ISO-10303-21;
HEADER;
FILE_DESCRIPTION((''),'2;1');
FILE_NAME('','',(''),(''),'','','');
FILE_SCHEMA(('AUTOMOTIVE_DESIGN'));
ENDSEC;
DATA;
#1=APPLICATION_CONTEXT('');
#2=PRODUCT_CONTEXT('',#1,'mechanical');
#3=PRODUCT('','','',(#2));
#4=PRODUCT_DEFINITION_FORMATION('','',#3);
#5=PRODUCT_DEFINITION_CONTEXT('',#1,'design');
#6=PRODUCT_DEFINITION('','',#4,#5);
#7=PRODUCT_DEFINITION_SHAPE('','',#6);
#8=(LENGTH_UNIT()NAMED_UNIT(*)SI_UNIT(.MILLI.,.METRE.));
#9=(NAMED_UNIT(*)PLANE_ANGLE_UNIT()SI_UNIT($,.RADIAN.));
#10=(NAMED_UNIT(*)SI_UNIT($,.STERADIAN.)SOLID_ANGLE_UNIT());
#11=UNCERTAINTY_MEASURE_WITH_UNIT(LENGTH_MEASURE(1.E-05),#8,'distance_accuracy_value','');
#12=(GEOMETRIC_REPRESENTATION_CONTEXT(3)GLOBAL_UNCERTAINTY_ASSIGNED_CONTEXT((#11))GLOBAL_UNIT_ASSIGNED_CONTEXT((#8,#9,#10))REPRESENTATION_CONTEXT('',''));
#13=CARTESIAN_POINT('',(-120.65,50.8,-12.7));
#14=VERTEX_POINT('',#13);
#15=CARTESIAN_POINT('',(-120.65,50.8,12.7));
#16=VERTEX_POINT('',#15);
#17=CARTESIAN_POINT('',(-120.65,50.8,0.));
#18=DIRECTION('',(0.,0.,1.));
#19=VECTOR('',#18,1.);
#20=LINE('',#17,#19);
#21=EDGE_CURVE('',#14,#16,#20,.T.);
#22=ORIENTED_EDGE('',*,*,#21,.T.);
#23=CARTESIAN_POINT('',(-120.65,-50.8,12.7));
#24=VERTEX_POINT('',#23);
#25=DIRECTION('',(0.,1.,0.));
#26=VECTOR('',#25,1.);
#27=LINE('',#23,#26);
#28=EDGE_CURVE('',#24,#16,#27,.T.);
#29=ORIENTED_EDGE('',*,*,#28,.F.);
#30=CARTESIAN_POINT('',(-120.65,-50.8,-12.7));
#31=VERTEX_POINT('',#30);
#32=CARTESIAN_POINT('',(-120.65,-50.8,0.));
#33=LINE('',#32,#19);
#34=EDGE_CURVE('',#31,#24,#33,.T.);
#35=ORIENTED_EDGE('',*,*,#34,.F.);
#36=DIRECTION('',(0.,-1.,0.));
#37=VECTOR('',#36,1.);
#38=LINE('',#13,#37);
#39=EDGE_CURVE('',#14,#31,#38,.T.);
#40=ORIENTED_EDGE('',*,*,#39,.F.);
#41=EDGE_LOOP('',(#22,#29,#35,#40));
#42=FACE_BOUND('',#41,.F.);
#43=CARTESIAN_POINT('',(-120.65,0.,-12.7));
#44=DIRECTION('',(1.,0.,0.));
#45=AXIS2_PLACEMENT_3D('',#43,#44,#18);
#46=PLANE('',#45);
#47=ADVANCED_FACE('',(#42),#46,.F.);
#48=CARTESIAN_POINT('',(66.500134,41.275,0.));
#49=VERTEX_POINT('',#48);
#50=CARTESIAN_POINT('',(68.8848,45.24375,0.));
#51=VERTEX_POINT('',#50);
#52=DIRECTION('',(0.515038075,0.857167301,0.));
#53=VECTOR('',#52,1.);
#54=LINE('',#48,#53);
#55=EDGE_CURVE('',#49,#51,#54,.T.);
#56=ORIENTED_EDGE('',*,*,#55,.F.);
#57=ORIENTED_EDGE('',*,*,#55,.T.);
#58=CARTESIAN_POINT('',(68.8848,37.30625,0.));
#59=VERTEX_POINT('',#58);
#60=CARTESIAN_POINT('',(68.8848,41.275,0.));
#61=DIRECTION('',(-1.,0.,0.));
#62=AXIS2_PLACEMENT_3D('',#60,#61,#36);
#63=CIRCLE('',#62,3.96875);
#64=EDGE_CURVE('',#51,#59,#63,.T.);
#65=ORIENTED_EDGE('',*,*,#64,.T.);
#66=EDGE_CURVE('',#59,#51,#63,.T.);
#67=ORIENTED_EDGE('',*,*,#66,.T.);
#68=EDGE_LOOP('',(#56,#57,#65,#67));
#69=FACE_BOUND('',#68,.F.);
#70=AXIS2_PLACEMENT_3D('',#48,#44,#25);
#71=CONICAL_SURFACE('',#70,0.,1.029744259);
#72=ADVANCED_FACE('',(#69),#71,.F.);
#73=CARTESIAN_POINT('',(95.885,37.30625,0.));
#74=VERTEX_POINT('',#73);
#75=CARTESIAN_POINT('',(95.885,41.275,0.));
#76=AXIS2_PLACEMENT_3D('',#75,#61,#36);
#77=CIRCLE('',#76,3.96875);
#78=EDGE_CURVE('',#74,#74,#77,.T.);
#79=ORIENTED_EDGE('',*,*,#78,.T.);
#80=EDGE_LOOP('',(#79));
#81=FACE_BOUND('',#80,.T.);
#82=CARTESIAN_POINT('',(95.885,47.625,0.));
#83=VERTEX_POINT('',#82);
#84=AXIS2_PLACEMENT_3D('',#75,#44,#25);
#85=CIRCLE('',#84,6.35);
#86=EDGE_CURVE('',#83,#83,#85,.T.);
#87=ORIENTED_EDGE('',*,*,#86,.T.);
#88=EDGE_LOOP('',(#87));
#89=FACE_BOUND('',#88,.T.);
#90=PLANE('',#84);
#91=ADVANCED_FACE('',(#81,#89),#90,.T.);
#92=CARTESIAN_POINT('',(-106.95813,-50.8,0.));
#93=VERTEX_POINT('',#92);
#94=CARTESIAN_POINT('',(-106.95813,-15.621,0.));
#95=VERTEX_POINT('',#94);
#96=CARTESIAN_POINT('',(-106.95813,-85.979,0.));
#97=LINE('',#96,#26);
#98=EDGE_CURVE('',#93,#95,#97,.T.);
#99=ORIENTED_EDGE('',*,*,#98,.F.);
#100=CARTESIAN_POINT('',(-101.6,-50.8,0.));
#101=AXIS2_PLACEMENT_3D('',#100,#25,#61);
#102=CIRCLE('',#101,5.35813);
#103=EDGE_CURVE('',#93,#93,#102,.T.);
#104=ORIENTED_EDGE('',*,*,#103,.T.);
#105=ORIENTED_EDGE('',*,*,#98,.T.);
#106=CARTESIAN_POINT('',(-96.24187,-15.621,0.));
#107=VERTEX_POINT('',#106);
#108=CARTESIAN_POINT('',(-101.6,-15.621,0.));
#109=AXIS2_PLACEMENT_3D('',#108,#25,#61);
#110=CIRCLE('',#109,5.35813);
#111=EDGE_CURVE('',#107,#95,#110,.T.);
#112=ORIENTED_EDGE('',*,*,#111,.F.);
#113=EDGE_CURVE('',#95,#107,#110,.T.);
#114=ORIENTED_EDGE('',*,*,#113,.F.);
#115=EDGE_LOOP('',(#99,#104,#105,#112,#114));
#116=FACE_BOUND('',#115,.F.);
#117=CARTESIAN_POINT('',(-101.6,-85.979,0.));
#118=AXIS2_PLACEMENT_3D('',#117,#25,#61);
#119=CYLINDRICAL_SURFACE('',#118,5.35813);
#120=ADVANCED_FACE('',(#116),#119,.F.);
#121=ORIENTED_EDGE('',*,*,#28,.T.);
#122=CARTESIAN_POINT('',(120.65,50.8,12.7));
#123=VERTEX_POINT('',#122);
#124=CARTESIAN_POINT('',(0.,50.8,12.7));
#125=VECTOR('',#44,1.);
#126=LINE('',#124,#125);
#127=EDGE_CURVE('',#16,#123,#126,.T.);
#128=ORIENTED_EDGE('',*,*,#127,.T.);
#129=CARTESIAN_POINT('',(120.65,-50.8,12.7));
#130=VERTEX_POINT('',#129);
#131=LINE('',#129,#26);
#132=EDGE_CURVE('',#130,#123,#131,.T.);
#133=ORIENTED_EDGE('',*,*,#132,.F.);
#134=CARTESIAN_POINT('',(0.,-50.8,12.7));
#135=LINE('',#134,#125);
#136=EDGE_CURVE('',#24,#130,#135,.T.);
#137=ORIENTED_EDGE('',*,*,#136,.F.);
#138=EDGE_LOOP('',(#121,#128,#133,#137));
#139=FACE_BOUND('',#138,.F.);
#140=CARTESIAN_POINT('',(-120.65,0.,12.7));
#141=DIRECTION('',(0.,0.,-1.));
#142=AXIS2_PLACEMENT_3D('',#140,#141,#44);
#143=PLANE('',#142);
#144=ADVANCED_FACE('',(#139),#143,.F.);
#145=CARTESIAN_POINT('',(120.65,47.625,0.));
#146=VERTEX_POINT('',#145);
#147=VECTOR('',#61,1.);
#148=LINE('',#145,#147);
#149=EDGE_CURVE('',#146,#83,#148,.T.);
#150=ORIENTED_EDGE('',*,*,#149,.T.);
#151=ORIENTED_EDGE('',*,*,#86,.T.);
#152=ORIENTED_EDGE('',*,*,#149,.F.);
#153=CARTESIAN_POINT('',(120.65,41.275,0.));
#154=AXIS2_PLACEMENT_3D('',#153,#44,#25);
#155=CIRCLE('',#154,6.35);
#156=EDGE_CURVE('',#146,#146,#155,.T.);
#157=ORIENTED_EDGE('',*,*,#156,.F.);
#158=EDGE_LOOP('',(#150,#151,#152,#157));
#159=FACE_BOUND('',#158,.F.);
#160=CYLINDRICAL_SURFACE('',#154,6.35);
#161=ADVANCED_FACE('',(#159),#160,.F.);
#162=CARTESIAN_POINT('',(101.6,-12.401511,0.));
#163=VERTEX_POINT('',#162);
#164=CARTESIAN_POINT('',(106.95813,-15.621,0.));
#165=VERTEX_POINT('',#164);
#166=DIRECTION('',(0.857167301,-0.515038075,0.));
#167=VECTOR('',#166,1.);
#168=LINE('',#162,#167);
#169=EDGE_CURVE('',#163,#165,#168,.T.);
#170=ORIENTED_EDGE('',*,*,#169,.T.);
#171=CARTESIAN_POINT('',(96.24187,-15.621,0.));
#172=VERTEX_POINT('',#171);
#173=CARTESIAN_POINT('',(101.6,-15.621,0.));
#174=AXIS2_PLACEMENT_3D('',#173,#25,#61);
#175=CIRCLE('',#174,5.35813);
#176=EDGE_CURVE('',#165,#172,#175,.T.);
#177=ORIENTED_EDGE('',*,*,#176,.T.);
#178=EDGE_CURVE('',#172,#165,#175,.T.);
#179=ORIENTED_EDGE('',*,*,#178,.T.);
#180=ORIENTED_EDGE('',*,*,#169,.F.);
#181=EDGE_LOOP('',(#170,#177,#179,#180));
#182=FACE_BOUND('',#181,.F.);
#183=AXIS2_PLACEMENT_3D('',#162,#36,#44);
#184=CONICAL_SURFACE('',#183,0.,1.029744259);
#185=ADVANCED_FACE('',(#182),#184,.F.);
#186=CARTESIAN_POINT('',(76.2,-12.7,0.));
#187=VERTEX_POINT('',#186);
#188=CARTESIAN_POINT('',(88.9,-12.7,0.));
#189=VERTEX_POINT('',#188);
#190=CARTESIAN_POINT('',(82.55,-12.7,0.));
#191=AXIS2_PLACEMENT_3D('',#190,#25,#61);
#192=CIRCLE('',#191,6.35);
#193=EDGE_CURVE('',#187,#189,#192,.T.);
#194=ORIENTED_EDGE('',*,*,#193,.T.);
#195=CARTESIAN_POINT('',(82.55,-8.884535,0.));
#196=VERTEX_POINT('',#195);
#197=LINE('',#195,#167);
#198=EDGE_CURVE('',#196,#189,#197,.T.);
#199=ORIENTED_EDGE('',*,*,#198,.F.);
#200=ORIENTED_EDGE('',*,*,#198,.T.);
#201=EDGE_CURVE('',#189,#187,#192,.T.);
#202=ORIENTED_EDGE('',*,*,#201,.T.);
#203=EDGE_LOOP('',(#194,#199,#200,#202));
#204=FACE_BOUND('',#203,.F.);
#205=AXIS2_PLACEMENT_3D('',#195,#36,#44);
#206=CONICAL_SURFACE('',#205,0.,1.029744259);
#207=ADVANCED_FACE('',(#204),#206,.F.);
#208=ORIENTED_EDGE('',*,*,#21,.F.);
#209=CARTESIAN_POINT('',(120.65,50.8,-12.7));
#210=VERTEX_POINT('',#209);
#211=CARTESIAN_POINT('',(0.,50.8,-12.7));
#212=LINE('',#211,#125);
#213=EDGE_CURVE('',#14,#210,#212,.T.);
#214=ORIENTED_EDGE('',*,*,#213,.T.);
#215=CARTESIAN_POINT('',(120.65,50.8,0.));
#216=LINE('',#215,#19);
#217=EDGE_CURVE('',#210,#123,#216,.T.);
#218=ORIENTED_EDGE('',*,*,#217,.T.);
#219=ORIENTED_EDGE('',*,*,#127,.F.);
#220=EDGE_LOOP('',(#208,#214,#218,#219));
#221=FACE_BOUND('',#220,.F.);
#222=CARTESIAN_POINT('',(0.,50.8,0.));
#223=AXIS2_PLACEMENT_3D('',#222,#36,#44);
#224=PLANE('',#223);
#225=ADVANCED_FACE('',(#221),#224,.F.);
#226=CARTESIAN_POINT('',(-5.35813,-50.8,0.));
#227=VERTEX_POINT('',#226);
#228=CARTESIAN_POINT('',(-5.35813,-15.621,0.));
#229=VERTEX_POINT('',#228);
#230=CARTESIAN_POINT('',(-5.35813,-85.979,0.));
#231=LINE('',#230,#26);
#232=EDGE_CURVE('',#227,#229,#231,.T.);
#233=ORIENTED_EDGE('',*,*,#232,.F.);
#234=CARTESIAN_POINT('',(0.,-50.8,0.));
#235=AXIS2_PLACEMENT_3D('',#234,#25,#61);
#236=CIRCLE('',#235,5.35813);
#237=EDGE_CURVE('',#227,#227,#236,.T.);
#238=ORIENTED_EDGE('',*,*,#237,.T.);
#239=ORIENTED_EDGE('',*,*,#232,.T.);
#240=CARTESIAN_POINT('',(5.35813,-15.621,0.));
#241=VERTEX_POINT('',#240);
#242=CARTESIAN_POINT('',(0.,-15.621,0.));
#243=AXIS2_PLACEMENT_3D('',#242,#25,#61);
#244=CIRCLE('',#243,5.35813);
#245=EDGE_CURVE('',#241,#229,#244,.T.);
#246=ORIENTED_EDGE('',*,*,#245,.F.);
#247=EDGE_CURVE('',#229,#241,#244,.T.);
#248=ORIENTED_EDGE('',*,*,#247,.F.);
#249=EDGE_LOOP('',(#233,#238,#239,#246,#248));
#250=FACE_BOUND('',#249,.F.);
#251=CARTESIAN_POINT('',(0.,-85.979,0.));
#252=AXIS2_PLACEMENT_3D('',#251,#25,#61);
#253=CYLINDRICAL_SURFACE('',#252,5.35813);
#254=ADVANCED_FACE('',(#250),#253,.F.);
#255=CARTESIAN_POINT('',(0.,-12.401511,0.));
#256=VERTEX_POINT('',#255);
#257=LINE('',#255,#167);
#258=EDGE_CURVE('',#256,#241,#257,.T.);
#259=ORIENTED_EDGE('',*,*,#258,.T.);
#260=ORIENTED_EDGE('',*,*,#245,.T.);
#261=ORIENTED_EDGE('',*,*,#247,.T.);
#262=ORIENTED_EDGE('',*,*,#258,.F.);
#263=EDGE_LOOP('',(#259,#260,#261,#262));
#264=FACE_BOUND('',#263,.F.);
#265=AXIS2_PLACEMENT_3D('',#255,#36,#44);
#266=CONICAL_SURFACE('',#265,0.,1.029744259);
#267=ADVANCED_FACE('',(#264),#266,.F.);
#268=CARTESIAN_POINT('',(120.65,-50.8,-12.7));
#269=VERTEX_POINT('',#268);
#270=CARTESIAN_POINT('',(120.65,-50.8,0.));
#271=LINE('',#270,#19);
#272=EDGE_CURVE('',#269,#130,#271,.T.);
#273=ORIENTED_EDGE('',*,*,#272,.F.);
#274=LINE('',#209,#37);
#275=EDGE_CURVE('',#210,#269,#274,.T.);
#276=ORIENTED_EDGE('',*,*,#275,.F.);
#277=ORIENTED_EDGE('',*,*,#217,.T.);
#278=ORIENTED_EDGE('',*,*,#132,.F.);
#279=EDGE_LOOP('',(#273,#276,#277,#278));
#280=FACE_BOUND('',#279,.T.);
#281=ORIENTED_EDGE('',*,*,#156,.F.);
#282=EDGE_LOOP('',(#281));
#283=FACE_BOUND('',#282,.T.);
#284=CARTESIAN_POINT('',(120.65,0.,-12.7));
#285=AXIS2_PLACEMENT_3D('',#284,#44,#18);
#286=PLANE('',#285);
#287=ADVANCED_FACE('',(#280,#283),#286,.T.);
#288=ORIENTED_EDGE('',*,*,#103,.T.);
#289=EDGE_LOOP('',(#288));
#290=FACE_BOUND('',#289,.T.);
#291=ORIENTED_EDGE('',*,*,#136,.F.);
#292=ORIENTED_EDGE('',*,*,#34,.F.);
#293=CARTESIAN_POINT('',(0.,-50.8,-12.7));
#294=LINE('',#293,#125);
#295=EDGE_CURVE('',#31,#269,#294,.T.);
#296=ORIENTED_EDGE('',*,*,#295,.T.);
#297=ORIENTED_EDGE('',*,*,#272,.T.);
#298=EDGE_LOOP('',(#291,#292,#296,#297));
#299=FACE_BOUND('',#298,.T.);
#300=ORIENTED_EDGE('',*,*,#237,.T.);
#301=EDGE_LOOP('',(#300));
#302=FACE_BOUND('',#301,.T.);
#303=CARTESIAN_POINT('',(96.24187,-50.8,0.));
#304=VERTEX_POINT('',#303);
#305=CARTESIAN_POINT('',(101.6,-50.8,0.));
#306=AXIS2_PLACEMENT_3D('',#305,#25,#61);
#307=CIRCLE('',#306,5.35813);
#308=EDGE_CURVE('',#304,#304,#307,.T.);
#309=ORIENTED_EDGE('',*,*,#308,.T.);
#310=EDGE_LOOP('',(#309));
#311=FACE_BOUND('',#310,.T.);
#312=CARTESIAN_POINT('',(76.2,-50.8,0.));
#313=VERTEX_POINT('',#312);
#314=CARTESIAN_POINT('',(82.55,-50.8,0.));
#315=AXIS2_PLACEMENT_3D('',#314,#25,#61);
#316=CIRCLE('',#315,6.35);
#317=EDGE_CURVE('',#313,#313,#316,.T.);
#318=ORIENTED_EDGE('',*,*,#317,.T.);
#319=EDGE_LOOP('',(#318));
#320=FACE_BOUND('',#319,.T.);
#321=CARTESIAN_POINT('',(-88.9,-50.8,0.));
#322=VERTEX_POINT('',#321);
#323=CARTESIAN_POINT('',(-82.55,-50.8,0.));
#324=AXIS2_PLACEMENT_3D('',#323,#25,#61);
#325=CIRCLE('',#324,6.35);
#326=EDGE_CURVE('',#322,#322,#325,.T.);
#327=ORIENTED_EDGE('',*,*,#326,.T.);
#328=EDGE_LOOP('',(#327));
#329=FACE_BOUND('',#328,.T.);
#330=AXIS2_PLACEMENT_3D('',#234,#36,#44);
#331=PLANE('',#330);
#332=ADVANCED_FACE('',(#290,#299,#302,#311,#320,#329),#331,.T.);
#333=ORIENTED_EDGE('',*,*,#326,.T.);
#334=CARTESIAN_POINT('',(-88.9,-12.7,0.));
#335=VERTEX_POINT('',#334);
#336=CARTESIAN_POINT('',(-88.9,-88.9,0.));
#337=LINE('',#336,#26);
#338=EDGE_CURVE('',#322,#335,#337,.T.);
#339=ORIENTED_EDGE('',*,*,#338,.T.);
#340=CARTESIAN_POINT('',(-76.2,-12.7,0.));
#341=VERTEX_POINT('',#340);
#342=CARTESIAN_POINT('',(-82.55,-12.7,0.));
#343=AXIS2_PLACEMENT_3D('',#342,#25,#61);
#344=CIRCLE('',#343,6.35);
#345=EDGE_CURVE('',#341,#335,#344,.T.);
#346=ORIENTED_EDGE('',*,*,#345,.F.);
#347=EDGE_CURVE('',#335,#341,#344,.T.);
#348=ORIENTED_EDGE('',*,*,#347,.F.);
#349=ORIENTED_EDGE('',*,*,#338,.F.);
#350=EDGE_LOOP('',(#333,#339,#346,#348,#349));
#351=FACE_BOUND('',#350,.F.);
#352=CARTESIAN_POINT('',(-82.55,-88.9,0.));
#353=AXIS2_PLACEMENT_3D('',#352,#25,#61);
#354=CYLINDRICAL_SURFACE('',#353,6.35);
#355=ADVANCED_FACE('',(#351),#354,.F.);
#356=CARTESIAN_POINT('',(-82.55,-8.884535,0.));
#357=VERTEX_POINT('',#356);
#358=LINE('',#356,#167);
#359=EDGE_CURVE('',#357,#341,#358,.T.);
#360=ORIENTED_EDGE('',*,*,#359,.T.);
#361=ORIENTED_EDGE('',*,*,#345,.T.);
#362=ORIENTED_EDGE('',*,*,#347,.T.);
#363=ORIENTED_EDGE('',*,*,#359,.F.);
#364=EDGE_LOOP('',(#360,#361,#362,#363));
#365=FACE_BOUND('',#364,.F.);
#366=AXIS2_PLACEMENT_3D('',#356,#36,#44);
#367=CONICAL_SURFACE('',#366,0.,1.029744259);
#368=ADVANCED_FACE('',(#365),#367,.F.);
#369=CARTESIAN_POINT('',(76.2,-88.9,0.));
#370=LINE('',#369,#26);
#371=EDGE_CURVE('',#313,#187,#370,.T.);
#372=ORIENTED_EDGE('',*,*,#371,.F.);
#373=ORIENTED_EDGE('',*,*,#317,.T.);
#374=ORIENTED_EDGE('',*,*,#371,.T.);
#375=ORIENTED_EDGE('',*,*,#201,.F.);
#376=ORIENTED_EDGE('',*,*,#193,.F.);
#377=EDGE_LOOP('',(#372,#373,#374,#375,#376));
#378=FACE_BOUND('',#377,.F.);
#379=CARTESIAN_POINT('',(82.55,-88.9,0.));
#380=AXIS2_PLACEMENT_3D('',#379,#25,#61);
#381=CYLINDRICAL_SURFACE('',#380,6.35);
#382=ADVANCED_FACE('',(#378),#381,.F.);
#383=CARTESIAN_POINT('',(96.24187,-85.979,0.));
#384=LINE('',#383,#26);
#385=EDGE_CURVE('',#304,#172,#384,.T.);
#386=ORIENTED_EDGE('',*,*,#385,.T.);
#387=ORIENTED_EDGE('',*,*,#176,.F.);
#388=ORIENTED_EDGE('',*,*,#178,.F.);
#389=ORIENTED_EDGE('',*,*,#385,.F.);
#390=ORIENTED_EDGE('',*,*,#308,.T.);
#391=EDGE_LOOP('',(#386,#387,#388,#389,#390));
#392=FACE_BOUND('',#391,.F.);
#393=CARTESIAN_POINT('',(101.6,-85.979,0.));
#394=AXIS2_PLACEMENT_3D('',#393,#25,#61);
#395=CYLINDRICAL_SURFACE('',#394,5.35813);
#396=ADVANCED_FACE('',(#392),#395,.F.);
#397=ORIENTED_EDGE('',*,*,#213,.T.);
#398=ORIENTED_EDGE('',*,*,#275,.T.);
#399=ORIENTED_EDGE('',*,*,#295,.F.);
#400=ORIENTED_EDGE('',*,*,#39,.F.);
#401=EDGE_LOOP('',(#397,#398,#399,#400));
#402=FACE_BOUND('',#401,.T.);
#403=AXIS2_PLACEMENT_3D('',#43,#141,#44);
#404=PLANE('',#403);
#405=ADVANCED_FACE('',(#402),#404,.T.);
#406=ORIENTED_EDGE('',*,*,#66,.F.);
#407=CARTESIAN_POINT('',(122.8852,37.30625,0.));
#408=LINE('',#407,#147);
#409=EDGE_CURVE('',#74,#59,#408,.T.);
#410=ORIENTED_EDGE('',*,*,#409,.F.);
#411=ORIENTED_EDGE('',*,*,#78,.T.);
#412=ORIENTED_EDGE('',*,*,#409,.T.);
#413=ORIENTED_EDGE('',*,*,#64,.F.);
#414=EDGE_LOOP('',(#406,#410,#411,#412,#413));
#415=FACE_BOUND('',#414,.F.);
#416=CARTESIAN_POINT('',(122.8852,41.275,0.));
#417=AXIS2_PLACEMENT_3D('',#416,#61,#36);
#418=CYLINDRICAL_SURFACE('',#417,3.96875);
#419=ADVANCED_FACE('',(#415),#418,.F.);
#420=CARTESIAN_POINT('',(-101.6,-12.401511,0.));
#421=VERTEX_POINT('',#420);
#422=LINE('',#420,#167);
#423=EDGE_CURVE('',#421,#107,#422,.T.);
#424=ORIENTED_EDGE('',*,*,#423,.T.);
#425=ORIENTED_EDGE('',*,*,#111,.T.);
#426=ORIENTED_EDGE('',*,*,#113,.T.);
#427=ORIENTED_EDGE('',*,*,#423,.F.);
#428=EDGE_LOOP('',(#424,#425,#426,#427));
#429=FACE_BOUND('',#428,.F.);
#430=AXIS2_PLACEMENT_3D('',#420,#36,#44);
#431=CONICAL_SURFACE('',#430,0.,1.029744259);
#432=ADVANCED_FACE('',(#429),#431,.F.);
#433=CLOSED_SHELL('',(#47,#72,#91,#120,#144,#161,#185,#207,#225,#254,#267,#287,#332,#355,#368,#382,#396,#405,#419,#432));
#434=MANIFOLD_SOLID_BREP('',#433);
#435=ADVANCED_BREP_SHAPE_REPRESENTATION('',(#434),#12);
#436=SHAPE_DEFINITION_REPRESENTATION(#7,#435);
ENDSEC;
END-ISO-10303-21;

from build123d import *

# Parameters (mm, degrees)
F0_W     = 241.3
F0_H     = 25.4
F1_DEPTH = 50.8
F2_R     = 6.35
F3_DEPTH = 24.765
F5_D     = 7.9375
F5_DEPTH = 27.0002
F5_TIP   = 2.3846655818
F7_D     = 10.71626
F7_DEPTH = 35.179
F7_TIP   = 3.2194893086
F8_D     = 12.7
F8_DEPTH = 38.1
F8_TIP   = 3.8154649308


# Not quite as in the source:
# - a length typed as a fraction of an inch, garbled in the dataset ("3 / 203.2 mm" for 3/8 in), is restored


with BuildPart() as f1:
    # F0 (on Front) → F1 (new body, symmetric)
    with BuildSketch(Plane.XZ):
        Rectangle(F0_W, F0_H)
    extrude(amount=F1_DEPTH, both=True)

    # F2 (on face) → F3 (cut)
    with BuildSketch(Plane.YZ.offset(120.65)):
        with Locations((41.275, 0)):
            Circle(F2_R)
    extrude(amount=-F3_DEPTH, mode=Mode.SUBTRACT)

    # F5
    with Locations(Plane.YZ.offset(95.885)):
        with Locations((41.275, 0)):
            Hole(F5_D / 2, depth=F5_DEPTH)
            with Locations((0, 0, -(F5_DEPTH + F5_TIP / 2))):  # 118° drill point
                Cone(0, F5_D / 2, F5_TIP, mode=Mode.SUBTRACT)

    # F7
    with Locations(Plane.XZ.offset(50.8)):
        with Locations((-101.6, 0), (0, 0), (101.6, 0)):
            Hole(F7_D / 2, depth=F7_DEPTH)
            with Locations((0, 0, -(F7_DEPTH + F7_TIP / 2))):  # 118° drill point
                Cone(0, F7_D / 2, F7_TIP, mode=Mode.SUBTRACT)

    # F8
    with Locations(Plane.XZ.offset(50.8)):
        with Locations((-82.55, 0), (82.55, 0)):
            Hole(F8_D / 2, depth=F8_DEPTH)
            with Locations((0, 0, -(F8_DEPTH + F8_TIP / 2))):  # 118° drill point
                Cone(0, F8_D / 2, F8_TIP, mode=Mode.SUBTRACT)


solid = f1.part
